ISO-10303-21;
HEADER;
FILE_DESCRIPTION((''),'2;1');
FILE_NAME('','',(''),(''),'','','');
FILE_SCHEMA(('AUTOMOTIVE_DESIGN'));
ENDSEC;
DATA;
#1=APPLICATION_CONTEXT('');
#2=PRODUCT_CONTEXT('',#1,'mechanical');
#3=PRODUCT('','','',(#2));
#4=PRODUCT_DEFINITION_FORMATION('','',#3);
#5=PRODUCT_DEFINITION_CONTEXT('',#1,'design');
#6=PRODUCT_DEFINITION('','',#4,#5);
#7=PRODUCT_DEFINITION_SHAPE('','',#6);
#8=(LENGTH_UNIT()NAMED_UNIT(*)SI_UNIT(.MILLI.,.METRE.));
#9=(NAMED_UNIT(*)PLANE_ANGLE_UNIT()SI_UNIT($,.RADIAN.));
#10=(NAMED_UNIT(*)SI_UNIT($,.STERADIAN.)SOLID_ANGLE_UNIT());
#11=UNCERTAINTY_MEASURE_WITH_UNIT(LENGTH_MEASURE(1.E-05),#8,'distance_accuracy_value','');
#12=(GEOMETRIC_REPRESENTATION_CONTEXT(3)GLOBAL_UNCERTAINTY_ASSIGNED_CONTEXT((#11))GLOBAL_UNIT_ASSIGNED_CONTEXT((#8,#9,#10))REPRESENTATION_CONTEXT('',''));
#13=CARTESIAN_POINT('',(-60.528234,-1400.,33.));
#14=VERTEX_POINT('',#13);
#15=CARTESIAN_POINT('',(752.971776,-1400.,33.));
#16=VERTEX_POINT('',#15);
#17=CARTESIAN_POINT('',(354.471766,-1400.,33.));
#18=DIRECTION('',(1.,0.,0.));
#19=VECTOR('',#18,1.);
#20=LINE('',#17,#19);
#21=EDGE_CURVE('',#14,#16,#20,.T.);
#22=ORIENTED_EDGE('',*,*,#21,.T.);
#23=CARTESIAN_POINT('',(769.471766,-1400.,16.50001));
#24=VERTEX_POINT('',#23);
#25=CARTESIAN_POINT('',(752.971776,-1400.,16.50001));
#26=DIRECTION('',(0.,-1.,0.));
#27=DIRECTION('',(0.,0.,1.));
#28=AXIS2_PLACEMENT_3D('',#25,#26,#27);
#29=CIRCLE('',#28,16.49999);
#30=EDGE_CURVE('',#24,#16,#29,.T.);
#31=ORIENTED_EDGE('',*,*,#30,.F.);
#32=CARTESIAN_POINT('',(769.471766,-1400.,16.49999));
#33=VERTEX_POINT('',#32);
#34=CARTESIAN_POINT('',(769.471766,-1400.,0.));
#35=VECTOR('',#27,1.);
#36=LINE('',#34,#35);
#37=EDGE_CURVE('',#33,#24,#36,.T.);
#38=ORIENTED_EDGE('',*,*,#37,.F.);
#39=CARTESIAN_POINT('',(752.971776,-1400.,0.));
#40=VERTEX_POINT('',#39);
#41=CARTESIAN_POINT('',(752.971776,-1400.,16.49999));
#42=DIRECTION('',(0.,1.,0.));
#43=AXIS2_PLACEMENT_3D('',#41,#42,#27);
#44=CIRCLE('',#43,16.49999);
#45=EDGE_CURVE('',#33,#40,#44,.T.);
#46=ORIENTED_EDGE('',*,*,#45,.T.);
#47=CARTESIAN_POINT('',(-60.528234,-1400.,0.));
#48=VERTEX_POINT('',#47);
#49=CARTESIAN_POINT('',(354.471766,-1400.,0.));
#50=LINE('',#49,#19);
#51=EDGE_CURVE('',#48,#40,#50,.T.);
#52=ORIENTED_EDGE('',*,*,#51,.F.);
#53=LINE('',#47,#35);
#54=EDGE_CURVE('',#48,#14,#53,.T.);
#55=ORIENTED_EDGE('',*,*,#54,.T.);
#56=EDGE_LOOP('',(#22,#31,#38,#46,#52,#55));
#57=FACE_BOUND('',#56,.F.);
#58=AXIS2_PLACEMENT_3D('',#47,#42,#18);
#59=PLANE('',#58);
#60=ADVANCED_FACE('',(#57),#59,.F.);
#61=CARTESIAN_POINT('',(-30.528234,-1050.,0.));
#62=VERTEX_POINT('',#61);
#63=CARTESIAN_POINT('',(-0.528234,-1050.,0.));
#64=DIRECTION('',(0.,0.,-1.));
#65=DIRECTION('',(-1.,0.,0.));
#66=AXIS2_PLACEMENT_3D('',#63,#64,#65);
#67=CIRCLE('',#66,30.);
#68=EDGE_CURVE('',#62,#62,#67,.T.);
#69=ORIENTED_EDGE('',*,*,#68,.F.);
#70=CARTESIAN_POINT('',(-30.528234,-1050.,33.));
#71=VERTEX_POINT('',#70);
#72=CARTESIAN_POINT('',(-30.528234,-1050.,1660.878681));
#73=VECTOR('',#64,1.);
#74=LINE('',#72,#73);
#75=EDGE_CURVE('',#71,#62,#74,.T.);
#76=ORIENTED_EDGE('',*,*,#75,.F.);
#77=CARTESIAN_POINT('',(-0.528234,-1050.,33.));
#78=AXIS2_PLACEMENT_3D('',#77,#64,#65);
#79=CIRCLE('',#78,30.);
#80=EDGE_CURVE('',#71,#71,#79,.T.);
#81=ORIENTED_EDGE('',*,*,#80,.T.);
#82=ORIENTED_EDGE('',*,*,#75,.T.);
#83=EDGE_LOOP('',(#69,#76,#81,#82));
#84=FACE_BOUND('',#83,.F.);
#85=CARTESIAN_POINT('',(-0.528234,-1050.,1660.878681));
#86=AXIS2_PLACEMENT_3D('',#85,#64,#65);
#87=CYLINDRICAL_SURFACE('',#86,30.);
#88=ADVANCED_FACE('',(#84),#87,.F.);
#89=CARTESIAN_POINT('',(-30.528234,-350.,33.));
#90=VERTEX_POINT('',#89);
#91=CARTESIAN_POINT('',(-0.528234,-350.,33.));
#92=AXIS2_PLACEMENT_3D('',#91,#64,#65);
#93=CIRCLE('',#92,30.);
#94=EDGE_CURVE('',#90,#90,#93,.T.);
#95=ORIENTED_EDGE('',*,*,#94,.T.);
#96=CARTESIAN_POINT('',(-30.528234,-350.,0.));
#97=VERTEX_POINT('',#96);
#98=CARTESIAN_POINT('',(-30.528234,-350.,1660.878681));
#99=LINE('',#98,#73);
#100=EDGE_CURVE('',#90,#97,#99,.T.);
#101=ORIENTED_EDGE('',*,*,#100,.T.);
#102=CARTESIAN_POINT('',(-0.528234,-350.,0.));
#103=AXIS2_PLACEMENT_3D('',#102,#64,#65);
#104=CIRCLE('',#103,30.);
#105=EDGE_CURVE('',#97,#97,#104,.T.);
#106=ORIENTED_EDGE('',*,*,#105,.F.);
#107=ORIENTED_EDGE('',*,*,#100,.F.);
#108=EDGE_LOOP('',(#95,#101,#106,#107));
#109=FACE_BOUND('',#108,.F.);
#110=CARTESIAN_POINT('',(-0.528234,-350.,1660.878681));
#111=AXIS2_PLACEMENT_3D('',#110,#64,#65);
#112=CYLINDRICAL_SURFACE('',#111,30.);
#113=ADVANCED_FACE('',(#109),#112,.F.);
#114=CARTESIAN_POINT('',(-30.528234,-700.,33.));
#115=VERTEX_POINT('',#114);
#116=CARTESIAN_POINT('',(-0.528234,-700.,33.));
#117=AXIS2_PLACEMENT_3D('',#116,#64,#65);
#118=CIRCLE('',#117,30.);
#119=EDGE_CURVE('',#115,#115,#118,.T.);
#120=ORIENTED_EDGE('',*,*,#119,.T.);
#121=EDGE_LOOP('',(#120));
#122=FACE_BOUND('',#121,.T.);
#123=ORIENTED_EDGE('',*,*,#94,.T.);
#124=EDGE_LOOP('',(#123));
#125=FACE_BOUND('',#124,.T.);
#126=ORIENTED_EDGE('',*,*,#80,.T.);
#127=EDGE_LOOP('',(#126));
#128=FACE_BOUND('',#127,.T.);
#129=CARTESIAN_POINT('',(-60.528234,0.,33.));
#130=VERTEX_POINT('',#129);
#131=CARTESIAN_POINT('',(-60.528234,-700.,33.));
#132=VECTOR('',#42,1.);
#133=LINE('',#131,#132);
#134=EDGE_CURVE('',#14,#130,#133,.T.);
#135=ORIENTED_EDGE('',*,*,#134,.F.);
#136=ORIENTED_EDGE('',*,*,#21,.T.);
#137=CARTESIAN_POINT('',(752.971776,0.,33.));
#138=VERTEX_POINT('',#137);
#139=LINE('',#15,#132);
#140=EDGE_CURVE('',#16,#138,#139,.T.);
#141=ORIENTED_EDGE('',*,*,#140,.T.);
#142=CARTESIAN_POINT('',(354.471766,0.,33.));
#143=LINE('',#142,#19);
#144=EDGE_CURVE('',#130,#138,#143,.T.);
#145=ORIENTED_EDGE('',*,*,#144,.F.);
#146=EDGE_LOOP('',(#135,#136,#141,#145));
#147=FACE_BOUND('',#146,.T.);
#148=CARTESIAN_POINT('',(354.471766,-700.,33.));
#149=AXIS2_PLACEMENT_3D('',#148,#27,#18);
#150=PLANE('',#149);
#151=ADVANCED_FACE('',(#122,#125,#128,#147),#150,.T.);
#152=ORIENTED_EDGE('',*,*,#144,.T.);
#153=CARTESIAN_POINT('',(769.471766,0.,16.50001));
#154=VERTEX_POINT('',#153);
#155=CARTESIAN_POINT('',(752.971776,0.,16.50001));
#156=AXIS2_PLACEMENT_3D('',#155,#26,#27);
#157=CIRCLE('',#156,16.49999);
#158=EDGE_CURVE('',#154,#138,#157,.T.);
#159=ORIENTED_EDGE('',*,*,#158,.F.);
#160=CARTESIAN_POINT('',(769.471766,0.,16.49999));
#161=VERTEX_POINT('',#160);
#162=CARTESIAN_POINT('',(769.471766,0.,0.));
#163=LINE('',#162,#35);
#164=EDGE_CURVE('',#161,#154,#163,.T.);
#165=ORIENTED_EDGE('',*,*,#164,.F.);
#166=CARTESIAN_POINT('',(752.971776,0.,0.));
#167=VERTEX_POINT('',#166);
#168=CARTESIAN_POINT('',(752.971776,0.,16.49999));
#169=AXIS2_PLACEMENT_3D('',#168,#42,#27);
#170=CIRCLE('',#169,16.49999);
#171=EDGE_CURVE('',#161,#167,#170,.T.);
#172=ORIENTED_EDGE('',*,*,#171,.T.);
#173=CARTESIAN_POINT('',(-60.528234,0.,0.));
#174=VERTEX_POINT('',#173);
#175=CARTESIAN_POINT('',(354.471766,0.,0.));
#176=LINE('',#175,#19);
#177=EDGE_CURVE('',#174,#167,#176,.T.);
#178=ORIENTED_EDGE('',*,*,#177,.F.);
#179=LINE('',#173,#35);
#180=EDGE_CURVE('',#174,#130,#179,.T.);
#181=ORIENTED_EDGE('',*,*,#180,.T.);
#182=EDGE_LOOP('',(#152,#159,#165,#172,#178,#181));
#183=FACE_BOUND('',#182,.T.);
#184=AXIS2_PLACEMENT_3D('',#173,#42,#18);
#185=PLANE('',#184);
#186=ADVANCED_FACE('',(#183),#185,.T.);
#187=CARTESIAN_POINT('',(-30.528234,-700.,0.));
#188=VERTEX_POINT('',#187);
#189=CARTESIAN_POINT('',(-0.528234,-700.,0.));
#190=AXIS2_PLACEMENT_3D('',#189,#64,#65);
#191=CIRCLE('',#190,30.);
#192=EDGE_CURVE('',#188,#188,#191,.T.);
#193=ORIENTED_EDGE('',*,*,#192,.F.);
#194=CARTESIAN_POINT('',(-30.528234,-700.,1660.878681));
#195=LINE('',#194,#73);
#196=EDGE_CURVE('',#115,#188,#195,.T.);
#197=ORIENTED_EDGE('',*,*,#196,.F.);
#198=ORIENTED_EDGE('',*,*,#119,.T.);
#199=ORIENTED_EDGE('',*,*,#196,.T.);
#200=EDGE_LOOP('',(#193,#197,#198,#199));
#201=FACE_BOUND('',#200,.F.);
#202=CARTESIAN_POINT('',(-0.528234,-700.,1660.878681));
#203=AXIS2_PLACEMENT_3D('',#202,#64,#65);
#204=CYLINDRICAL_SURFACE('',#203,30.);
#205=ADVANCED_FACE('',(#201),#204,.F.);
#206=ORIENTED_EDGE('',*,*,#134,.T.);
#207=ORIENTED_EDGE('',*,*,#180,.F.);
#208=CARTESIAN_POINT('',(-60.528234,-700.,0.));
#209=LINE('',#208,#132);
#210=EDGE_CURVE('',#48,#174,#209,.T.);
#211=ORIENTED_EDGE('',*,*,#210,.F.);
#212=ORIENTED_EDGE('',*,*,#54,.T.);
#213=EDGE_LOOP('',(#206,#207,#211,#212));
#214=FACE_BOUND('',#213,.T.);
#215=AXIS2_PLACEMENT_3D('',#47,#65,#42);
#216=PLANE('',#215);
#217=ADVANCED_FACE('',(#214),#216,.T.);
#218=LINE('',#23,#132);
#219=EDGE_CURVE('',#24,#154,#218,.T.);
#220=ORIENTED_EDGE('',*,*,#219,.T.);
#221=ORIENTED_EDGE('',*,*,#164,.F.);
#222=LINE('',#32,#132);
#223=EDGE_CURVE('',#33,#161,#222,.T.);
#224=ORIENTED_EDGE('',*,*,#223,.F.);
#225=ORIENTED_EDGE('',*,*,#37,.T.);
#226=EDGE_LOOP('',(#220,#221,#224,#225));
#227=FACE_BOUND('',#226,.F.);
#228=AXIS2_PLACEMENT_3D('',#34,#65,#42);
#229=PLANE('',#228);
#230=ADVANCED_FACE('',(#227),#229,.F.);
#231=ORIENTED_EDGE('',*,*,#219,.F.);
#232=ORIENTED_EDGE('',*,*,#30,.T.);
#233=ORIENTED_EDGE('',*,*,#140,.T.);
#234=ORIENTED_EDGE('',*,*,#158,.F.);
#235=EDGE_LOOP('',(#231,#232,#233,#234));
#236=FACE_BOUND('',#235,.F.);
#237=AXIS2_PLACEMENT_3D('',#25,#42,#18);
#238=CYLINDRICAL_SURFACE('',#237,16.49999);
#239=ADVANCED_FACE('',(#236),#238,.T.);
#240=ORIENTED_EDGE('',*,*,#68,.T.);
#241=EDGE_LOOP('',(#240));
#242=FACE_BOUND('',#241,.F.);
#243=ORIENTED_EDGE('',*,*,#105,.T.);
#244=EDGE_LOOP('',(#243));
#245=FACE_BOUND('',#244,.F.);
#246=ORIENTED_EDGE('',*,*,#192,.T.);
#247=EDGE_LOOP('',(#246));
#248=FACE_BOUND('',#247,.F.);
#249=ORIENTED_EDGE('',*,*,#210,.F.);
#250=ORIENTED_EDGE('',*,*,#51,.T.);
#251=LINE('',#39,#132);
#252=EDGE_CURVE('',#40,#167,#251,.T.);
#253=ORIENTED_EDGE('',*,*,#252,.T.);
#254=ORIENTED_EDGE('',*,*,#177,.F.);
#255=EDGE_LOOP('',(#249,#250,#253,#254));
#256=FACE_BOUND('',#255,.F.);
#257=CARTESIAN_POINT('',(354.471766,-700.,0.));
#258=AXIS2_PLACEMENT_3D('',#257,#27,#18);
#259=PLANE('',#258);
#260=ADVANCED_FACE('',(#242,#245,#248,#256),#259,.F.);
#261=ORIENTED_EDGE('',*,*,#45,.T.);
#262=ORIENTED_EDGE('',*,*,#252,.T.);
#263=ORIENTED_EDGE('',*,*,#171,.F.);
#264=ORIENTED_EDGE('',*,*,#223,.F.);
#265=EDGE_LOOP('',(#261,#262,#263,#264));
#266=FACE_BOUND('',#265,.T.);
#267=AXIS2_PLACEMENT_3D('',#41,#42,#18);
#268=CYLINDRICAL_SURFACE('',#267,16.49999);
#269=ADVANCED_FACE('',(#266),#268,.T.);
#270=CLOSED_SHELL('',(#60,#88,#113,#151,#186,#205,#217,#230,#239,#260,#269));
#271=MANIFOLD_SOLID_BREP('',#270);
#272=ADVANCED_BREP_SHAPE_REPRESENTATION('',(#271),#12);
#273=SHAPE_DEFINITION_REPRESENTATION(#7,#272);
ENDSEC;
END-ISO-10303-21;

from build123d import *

# Parameters (mm, degrees)
F0_W     = 830
F0_H     = 1400
F1_DEPTH = 33
F2_R     = 16.49999
F4_D     = 60


# Not quite as in the source:
# - a fillet or chamfer is up to 0.001 mm smaller than in the source, because OpenCascade refuses the exact size


with BuildPart() as f1:
    # F0 (on Top) → F1 (new body)
    with BuildSketch(Plane.XY):
        with Locations((354.4717663527, -700)):
            Rectangle(F0_W, F0_H)
    extrude(amount=F1_DEPTH)

    # F2 (radius 16.5 in the source; OpenCascade refuses exactly that, so slightly less here)
    f2_edges = [f1.edges().sort_by_distance(p)[0] for p in [
        (769.471766, -700, 33),
        (769.471766, -700, 0),
    ]]
    fillet(f2_edges, radius=F2_R)

    # F4 (through all)
    with Locations(Plane.XY.offset(33)):
        with Locations((-0.5282336473, -1050), (-0.5282336473, -700), (-0.5282336473, -350)):
            Hole(F4_D / 2)


solid = f1.part
